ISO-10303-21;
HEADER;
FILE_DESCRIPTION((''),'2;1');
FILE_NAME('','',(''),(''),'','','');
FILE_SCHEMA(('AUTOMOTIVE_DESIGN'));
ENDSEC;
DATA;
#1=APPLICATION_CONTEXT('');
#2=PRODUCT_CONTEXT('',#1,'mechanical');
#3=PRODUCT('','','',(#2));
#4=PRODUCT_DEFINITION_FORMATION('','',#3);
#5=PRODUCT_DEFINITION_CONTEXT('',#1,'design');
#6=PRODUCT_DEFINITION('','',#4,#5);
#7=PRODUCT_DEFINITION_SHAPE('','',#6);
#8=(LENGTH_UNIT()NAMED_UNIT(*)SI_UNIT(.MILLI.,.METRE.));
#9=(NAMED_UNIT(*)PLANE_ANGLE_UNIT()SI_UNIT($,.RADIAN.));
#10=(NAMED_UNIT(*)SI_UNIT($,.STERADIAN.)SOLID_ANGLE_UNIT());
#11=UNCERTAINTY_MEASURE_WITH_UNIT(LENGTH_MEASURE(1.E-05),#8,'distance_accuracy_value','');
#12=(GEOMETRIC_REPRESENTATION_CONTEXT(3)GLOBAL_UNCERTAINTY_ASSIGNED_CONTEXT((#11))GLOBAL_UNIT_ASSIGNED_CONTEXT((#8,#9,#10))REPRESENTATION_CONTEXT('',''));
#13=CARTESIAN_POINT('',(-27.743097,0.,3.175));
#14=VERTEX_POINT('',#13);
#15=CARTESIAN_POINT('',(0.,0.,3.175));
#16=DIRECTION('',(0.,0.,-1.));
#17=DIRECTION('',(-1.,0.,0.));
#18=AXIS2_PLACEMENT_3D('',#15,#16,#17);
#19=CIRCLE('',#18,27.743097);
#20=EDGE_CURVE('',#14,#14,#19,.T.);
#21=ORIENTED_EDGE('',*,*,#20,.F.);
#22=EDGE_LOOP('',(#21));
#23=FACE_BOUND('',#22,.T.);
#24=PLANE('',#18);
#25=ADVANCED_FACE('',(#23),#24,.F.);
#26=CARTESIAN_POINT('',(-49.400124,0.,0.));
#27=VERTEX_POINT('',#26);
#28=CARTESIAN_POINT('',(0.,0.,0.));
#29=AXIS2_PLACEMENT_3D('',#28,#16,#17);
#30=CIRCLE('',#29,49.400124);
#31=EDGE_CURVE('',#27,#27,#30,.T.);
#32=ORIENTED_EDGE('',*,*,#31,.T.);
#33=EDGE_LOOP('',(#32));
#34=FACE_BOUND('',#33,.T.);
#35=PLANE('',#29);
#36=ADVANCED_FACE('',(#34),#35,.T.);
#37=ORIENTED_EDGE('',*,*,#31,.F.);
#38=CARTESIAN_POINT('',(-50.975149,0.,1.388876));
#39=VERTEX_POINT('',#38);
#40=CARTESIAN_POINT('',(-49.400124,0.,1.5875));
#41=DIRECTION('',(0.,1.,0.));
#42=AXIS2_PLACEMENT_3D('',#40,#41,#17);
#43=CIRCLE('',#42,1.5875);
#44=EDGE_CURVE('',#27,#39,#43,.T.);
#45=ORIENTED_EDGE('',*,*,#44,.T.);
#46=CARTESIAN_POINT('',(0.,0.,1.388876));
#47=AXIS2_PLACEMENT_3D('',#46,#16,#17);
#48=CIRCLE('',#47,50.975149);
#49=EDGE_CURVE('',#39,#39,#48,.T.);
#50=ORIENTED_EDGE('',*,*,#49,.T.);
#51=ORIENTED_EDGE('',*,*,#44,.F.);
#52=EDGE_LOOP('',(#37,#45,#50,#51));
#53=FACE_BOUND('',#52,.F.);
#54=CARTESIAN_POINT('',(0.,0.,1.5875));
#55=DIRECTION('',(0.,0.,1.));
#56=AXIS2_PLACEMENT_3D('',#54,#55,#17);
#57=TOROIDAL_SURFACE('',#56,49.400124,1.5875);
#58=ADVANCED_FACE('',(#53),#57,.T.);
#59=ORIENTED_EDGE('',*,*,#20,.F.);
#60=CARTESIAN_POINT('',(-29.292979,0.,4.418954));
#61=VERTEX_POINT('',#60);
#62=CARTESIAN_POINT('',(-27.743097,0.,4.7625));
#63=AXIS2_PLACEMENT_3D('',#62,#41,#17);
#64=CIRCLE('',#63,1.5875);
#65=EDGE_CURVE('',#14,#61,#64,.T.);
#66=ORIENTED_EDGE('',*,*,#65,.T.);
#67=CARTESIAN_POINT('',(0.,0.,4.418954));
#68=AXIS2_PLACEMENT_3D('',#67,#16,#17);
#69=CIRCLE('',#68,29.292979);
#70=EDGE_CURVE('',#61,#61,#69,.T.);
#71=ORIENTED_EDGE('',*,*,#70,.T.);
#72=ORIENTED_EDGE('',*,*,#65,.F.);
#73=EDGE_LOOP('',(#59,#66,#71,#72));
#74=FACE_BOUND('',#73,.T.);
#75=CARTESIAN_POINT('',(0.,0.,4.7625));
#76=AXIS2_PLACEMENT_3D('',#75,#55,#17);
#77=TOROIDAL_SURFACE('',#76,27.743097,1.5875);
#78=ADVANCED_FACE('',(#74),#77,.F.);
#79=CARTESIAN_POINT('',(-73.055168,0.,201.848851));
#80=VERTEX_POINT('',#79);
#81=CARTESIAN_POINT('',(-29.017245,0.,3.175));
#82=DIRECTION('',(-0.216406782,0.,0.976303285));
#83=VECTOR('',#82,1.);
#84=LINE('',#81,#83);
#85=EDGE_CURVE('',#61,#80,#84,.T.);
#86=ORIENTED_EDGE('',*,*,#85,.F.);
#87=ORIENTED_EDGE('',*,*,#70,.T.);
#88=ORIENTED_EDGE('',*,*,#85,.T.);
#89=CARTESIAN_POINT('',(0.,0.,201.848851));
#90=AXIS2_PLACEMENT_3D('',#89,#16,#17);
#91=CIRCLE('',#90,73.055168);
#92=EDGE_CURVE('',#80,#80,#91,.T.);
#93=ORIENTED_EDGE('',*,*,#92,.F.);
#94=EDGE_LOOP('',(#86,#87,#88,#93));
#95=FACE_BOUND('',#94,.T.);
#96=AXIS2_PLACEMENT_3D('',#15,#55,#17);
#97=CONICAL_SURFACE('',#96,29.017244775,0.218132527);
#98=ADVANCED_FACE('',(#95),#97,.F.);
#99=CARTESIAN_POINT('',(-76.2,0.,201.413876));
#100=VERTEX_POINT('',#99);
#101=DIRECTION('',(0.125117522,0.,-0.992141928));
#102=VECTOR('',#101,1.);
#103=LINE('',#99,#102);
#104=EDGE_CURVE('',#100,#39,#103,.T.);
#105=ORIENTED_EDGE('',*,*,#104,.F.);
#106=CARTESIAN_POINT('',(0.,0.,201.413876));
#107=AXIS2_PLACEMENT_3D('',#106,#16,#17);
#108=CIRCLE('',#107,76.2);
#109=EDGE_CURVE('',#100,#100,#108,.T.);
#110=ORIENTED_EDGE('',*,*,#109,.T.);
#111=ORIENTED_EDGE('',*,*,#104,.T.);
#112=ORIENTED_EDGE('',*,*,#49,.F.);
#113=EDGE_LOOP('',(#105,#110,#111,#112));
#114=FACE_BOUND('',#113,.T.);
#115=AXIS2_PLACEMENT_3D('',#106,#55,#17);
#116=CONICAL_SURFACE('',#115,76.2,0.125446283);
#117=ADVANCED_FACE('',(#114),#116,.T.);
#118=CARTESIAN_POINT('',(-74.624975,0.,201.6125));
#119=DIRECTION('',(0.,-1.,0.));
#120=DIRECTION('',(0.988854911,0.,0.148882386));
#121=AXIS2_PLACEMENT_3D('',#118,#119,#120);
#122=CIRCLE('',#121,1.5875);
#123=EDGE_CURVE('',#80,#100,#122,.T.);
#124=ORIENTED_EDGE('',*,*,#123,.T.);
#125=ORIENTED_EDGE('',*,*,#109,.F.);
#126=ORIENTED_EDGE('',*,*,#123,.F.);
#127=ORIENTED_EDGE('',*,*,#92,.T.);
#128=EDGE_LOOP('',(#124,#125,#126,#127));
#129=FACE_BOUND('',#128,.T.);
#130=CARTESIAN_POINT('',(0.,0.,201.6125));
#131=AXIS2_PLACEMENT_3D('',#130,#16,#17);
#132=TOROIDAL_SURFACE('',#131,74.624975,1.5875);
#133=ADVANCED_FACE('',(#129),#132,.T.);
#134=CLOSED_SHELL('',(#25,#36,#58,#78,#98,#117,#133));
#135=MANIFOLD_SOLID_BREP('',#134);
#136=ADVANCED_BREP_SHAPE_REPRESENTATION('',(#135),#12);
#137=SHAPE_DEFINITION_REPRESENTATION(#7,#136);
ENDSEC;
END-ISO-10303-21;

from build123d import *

# Parameters (mm, degrees)
F3_R = 1.5875


# Not quite as in the source:
# - a variable given as a bare number and used for a length is read in inches; the dataset says mm whatever the document's units were


with BuildPart() as f2:
    # F1 (on Front) → F2 (revolve)
    with BuildSketch(Plane.XZ):
        with BuildLine():
            Line((-50.8, 0), (0, 0))
            Line((0, 0), (0, 3.175))
            Line((0, 3.175), (-29.0172447749, 3.175))
            Line((-29.0172447749, 3.175), (-73.0551675175, 201.8488507874))
            ThreePointArc((-73.0551675175, 201.8488507874), (-74.8424777646, 203.1850293835), (-76.2, 201.4138759344))
            Line((-76.2, 201.4138759344), (-50.8, 0))
        make_face()
    revolve(axis=Axis((0, 0, 1.5875), (0, 0, -1)))

    # F3
    f3_edges = [f2.edges().sort_by_distance(p)[0] for p in [
        (50.8, 0, 0),
        (29.017245, 0, 3.175),
    ]]
    fillet(f3_edges, radius=F3_R)


solid = f2.part
